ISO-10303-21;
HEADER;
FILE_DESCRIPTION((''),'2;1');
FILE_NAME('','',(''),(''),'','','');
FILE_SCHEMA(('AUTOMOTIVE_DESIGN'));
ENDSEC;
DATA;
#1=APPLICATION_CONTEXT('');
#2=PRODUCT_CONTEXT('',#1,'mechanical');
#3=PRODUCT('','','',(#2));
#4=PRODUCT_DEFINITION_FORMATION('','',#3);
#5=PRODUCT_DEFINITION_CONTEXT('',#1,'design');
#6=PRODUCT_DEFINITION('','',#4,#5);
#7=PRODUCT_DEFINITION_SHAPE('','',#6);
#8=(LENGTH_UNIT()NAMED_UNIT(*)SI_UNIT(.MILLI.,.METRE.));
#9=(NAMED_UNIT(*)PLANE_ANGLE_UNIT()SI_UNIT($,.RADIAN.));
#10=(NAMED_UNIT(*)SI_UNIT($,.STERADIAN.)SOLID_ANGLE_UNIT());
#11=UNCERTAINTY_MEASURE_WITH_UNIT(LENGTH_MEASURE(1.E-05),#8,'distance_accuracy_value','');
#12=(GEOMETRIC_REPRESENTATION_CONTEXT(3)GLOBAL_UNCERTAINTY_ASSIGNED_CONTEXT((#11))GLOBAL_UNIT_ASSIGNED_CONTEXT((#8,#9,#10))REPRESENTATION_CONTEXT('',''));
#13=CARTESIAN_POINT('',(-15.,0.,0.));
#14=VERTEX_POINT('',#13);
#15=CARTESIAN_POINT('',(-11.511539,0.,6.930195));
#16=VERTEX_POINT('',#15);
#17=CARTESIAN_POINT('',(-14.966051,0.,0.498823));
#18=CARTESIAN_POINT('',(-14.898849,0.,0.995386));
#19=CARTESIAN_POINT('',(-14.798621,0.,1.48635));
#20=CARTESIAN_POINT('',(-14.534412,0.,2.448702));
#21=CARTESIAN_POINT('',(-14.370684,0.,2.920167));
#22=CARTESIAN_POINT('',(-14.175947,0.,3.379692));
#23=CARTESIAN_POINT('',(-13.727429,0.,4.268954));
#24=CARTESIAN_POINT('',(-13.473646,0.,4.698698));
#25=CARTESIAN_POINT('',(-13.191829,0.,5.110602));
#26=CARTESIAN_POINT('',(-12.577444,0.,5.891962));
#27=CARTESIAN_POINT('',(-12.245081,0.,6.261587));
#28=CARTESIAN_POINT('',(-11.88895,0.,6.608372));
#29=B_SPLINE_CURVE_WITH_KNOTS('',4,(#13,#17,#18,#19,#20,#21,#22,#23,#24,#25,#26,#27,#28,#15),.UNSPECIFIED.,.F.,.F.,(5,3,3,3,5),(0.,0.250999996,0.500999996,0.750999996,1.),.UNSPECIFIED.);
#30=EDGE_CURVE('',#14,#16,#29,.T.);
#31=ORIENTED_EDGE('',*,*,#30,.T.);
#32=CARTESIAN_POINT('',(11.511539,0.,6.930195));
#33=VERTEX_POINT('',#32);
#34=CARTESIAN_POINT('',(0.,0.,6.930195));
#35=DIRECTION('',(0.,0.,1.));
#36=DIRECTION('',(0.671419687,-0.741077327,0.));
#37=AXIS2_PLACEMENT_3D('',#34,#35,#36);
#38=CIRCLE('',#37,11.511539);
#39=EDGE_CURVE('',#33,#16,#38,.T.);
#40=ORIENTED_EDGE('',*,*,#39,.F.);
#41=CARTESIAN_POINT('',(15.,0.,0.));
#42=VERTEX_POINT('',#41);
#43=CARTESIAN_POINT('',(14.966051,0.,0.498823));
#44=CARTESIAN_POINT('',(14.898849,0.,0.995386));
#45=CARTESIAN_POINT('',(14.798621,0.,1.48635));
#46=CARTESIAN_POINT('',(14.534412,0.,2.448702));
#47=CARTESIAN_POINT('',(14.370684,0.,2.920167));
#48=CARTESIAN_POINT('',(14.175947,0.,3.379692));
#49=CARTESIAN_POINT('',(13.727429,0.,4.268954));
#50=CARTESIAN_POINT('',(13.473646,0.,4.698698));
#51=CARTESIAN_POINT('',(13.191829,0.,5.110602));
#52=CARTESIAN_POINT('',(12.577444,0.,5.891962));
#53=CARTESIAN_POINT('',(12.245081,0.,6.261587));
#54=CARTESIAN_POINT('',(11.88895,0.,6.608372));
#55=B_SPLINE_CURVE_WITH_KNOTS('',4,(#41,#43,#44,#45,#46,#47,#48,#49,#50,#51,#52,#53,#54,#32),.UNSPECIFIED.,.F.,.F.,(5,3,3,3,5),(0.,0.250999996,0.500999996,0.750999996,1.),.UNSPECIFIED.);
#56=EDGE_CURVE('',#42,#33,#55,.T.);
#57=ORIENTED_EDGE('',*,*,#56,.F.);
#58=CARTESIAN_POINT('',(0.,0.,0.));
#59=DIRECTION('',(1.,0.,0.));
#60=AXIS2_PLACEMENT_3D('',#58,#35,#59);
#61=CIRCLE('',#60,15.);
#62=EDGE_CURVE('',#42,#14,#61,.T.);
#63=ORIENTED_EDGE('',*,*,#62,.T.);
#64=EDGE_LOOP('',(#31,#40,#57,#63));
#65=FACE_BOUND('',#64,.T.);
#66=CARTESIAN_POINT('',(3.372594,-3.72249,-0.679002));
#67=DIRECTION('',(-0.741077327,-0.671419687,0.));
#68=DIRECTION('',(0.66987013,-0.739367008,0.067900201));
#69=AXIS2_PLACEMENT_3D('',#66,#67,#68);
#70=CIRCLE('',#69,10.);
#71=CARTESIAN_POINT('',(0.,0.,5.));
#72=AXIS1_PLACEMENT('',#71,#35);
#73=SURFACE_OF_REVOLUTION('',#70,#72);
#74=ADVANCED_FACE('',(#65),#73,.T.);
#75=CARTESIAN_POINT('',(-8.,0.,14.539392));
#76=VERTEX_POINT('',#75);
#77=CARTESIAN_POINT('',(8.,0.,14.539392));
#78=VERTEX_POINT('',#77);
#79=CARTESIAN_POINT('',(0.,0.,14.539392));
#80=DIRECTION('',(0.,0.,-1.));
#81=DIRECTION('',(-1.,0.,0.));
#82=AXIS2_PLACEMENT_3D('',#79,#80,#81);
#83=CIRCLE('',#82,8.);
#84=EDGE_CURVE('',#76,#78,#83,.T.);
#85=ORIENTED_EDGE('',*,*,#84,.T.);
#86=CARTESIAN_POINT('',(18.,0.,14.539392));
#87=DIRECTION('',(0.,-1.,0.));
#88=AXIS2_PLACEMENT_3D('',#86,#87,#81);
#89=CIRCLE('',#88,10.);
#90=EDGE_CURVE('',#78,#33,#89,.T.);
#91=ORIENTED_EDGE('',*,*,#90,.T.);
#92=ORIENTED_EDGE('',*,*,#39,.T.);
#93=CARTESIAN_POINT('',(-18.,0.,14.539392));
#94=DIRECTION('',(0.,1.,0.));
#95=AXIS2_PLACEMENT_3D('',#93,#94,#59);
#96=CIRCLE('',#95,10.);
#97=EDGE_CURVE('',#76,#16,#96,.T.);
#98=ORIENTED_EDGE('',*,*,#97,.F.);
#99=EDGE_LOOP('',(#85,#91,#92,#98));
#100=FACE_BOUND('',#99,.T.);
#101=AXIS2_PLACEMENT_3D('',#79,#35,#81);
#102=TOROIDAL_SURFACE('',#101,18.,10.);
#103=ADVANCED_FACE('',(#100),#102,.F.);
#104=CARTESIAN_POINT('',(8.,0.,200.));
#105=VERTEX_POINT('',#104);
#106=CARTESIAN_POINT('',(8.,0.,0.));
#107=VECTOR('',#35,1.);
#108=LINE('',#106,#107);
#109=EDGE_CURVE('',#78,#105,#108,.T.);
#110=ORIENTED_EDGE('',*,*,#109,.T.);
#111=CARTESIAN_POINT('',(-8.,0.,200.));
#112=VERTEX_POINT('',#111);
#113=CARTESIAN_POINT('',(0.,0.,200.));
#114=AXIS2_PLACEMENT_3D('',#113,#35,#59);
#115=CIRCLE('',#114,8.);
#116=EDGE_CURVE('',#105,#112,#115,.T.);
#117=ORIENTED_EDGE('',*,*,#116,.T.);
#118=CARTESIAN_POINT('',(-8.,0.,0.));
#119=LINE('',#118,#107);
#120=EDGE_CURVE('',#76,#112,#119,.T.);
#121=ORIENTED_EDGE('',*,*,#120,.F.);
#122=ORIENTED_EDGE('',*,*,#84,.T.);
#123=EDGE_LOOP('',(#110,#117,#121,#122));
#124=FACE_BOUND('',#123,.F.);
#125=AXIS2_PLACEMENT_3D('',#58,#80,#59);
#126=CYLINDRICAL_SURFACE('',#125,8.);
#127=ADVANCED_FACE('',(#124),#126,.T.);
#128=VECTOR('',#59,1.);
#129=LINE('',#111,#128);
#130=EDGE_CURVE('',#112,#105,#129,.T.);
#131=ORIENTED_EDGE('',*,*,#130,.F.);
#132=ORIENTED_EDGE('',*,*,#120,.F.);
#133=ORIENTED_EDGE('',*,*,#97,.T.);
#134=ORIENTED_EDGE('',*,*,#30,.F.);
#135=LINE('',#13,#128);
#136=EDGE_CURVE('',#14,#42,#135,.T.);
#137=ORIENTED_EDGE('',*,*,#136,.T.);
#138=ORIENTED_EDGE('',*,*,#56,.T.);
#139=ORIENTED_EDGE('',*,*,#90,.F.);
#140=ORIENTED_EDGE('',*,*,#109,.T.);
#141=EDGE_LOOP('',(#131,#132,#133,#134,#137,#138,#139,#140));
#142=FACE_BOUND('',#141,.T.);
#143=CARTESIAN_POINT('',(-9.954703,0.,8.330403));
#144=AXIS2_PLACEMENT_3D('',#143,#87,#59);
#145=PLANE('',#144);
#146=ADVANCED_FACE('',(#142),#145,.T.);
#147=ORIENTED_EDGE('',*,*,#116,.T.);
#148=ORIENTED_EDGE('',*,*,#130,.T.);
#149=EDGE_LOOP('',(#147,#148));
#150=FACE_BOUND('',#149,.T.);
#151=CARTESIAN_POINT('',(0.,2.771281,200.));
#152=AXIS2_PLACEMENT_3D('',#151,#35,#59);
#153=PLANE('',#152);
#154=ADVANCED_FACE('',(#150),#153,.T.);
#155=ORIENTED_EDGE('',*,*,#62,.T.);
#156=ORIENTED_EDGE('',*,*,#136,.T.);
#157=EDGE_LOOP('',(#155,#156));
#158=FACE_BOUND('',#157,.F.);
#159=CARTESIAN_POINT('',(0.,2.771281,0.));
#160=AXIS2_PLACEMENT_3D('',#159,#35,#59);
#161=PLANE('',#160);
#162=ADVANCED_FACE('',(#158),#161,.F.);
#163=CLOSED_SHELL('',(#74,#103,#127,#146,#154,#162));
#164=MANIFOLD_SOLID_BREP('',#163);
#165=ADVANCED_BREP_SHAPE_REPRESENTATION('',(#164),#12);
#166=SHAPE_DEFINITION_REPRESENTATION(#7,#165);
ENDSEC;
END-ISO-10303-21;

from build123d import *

# Parameters (mm, degrees)
F1_DEPTH    = 5
F2_DEPTH    = 200
F3_T2_ANGLE = 180
F4_T2_ANGLE = 275.6465366004


# Not quite as in the source:
# - a fillet or chamfer that OpenCascade refuses, or shapes differently, is made with other operations: its cross-section is extruded or revolved along the edge and cut away or added


with BuildPart() as f1:
    # F0 (on Top) → F1 (new body)
    with BuildSketch(Plane.XY):
        with BuildLine():
            ThreePointArc((15, 0), (0, 15), (-15, 0))
            Line((-15, 0), (-8, 0))
            ThreePointArc((-8, 0), (0, 8), (8, 0))
            Line((8, 0), (15, 0))
        make_face()
        with BuildLine():
            ThreePointArc((8, 0), (0, 8), (-8, 0))
            Line((-8, 0), (8, 0))
        make_face()
    extrude(amount=F1_DEPTH)

    # F0 (on Top) → F2 (join)
    with BuildSketch(Plane.XY):
        with BuildLine():
            ThreePointArc((8, 0), (0, 8), (-8, 0))
            Line((-8, 0), (8, 0))
        make_face()
    extrude(amount=F2_DEPTH)

    # F3: fillet of radius 10 on 1 edges, made by hand

    # F3_s1 → F3_t2 (revolve)
    with BuildSketch(Plane.XZ):
        with BuildLine():
            ThreePointArc((-8, 14.5393920142), (-9.9377422517, 8.6233122311), (-15, 5))
            Line((-15, 5), (-8, 5))
            Line((-8, 5), (-8, 14.5393920142))
        make_face()
    revolve(axis=Axis((0, 0, 5), (0, 0, -1)), revolution_arc=F3_T2_ANGLE)

    # F4: fillet of radius 10 on 1 edges, made by hand

    # F4_s1 → F4_t2 (revolve, cut)
    with BuildSketch(Plane(origin=(0, 0, 0), x_dir=(0, 0, 1), z_dir=(-0.7410773266, -0.6714196869, 0))):
        with BuildLine():
            ThreePointArc((0, -15), (3.8172075141, -13.9552733931), (6.9301950027, -11.511539409))
            ThreePointArc((6.9301950027, -11.511539409), (5.7894854023, -13.1586020321), (5, -15))
            Line((5, -15), (0, -15))
        make_face()
    revolve(axis=Axis((0, 0, 5), (0, 0, 1)), revolution_arc=F4_T2_ANGLE, mode=Mode.SUBTRACT)


solid = f1.part
